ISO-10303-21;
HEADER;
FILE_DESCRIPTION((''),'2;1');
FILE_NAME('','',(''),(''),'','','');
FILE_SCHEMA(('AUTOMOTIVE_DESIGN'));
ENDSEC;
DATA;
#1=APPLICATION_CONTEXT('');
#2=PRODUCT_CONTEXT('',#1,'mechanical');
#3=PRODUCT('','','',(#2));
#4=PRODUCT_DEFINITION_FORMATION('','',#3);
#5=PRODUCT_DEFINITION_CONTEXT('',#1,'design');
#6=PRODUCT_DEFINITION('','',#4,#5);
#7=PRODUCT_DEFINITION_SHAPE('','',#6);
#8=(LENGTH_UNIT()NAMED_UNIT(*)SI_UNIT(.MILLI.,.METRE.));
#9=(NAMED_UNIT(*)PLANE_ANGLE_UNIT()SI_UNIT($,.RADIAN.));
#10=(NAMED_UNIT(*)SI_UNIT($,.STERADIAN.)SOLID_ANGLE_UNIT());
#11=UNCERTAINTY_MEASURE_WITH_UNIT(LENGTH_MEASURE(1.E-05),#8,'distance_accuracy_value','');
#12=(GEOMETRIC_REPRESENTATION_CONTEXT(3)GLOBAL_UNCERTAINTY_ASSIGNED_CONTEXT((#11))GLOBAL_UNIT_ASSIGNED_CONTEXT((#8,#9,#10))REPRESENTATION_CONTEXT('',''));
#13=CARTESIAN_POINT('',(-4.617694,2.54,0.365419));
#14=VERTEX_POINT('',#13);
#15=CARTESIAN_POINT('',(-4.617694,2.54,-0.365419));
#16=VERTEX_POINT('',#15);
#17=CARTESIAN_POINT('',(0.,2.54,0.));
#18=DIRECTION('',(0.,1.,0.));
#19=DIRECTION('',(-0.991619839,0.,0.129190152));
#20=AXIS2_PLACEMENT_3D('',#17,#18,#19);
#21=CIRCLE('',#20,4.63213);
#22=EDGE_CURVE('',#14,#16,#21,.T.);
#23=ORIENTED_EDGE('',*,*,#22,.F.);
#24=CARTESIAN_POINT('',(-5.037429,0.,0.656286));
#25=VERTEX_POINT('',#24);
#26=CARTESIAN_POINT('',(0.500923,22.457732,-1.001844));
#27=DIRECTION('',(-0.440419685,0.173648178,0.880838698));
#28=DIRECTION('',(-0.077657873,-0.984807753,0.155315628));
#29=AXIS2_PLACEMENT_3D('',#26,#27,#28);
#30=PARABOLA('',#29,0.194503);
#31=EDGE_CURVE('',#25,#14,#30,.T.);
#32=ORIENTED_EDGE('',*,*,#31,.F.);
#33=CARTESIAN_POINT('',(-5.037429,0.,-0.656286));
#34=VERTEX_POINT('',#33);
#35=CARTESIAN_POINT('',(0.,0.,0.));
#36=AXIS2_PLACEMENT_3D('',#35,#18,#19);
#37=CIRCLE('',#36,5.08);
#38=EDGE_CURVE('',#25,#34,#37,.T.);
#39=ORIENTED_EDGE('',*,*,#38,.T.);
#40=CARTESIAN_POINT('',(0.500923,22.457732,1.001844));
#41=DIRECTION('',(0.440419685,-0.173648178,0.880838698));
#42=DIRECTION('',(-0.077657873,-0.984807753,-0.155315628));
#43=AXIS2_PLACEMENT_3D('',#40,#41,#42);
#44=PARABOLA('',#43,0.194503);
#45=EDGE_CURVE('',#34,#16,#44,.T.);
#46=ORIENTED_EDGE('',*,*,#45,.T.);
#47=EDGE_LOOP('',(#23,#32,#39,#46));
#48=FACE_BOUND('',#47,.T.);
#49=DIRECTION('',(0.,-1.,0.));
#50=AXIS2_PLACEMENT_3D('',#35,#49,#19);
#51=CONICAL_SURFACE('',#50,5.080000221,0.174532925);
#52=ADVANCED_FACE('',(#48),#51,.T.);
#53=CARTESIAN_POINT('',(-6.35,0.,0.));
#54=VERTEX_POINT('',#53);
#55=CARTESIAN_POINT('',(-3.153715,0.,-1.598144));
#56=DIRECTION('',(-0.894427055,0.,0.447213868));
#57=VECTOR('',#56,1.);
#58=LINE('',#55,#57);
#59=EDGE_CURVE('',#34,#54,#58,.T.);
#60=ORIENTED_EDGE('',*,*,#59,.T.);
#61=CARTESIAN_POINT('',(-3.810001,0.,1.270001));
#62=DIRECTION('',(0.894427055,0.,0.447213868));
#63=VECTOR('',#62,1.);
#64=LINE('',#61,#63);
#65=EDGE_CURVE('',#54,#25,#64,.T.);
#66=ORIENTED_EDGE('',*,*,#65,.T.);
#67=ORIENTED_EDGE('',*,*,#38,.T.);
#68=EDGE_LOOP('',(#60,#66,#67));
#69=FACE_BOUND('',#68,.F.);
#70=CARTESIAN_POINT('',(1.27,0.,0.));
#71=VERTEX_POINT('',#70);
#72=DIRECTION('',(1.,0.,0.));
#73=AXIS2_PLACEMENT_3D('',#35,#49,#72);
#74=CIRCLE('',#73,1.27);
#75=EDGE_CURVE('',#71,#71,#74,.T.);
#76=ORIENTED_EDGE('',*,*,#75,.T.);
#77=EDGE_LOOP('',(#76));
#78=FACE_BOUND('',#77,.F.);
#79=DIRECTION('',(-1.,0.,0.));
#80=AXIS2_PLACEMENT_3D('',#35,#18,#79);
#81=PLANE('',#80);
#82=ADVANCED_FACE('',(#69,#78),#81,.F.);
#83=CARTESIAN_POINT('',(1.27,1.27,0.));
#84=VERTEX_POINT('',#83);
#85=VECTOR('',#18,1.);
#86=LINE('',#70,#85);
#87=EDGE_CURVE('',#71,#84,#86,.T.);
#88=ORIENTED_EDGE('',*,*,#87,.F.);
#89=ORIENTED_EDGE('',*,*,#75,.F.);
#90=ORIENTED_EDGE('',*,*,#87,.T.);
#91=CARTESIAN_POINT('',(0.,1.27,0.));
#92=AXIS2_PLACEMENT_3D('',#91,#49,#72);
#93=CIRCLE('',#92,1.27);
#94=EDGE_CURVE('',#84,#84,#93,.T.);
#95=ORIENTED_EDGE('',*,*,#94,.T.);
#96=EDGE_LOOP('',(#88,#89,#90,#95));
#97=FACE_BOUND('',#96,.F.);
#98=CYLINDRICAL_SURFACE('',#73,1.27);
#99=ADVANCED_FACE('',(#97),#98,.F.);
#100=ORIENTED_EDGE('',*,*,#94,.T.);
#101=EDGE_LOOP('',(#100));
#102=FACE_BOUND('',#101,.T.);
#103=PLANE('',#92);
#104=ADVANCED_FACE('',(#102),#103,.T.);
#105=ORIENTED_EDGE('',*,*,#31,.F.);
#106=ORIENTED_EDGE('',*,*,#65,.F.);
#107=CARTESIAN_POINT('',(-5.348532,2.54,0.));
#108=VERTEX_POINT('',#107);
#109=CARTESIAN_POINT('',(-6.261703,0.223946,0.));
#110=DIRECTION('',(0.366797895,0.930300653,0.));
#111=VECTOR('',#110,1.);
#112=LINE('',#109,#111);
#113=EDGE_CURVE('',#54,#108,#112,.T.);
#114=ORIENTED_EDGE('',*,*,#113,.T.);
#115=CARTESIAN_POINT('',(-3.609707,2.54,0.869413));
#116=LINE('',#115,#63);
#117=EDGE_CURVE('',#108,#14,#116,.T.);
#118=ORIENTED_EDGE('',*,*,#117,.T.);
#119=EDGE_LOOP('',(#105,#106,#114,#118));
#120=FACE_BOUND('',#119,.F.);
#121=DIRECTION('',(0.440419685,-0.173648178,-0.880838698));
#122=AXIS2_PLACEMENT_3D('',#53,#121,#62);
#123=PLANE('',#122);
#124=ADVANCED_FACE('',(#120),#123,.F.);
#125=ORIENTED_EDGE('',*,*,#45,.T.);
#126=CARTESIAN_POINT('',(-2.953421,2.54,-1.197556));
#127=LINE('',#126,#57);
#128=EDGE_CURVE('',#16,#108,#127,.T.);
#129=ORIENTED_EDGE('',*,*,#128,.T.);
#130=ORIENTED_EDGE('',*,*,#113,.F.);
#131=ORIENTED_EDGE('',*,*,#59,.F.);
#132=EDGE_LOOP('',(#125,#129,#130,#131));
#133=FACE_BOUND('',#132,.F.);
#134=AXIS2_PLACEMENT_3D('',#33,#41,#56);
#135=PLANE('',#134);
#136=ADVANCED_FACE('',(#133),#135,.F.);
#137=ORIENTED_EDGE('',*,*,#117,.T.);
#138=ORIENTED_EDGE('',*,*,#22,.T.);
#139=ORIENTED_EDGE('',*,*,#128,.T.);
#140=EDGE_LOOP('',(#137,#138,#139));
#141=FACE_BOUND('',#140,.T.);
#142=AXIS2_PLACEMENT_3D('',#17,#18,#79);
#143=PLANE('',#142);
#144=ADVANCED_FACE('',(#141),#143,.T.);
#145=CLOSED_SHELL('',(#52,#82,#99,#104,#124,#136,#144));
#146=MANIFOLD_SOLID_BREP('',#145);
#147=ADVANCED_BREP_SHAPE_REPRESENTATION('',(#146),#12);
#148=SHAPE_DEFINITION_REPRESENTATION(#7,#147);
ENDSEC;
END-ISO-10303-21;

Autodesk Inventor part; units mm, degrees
ref_plane "YZ Plane" through (0, 0, 0) normal (1, 0, 0) x (0, 1, 0)
ref_plane "XZ Plane" through (0, 0, 0) normal (0, 1, 0) x (-1, 0, 0)
ref_plane "XY Plane" through (0, 0, 0) normal (0, 0, 1) x (1, 0, 0)
sketch "Sketch1" plane through (0, 0, 0) normal (0, 1, 0) x (-1, 0, 0)
  circle A0 centre (0, 0) radius 5.08
  line L0 (0, 0) -> (0, 3.175)
  line L1 (0, 0) -> (0, -3.175)
  circle A1 centre (0, 0) radius 6.35
  line L2 (0, 3.175) -> (6.35, 0)
  line L3 (0, -3.175) -> (6.35, 0)
  point P0 (5.037429, -0.656286)
  point P1 (5.037429, 0.656286)
  dimension "d3" = 12.7
  dimension "d0" = 10.16
  dimension "d1" = 3.175
  dimension "d2" = 3.175
  dimension "d4" = 6.35
sketch "Sketch1 outline for Extrusion1" plane through (0, 0, 0) normal (0, 1, 0) x (-1, 0, 0)
  line L0 (5.037429, -0.656286) -> (6.35, 0)
  arc A0 (5.037429, 0.656286) -> (5.037429, -0.656286) centre (0, 0) ccw
  line L1 (6.35, 0) -> (5.037429, 0.656286)
extrude "Extrusion1" add sketch "Sketch1 outline for Extrusion1" along normal blind 2.54 draft -10
sketch "Sketch2" plane through (0, 0, 0) normal (0, -1, 0) x (1, 0, 0)
  circle A0 centre (0, 0) radius 1.27
  dimension "d7" = 2.54
extrude "Extrusion2" cut sketch "Sketch2" against normal blind 1.27
properties part number "ChairDial(H)"
